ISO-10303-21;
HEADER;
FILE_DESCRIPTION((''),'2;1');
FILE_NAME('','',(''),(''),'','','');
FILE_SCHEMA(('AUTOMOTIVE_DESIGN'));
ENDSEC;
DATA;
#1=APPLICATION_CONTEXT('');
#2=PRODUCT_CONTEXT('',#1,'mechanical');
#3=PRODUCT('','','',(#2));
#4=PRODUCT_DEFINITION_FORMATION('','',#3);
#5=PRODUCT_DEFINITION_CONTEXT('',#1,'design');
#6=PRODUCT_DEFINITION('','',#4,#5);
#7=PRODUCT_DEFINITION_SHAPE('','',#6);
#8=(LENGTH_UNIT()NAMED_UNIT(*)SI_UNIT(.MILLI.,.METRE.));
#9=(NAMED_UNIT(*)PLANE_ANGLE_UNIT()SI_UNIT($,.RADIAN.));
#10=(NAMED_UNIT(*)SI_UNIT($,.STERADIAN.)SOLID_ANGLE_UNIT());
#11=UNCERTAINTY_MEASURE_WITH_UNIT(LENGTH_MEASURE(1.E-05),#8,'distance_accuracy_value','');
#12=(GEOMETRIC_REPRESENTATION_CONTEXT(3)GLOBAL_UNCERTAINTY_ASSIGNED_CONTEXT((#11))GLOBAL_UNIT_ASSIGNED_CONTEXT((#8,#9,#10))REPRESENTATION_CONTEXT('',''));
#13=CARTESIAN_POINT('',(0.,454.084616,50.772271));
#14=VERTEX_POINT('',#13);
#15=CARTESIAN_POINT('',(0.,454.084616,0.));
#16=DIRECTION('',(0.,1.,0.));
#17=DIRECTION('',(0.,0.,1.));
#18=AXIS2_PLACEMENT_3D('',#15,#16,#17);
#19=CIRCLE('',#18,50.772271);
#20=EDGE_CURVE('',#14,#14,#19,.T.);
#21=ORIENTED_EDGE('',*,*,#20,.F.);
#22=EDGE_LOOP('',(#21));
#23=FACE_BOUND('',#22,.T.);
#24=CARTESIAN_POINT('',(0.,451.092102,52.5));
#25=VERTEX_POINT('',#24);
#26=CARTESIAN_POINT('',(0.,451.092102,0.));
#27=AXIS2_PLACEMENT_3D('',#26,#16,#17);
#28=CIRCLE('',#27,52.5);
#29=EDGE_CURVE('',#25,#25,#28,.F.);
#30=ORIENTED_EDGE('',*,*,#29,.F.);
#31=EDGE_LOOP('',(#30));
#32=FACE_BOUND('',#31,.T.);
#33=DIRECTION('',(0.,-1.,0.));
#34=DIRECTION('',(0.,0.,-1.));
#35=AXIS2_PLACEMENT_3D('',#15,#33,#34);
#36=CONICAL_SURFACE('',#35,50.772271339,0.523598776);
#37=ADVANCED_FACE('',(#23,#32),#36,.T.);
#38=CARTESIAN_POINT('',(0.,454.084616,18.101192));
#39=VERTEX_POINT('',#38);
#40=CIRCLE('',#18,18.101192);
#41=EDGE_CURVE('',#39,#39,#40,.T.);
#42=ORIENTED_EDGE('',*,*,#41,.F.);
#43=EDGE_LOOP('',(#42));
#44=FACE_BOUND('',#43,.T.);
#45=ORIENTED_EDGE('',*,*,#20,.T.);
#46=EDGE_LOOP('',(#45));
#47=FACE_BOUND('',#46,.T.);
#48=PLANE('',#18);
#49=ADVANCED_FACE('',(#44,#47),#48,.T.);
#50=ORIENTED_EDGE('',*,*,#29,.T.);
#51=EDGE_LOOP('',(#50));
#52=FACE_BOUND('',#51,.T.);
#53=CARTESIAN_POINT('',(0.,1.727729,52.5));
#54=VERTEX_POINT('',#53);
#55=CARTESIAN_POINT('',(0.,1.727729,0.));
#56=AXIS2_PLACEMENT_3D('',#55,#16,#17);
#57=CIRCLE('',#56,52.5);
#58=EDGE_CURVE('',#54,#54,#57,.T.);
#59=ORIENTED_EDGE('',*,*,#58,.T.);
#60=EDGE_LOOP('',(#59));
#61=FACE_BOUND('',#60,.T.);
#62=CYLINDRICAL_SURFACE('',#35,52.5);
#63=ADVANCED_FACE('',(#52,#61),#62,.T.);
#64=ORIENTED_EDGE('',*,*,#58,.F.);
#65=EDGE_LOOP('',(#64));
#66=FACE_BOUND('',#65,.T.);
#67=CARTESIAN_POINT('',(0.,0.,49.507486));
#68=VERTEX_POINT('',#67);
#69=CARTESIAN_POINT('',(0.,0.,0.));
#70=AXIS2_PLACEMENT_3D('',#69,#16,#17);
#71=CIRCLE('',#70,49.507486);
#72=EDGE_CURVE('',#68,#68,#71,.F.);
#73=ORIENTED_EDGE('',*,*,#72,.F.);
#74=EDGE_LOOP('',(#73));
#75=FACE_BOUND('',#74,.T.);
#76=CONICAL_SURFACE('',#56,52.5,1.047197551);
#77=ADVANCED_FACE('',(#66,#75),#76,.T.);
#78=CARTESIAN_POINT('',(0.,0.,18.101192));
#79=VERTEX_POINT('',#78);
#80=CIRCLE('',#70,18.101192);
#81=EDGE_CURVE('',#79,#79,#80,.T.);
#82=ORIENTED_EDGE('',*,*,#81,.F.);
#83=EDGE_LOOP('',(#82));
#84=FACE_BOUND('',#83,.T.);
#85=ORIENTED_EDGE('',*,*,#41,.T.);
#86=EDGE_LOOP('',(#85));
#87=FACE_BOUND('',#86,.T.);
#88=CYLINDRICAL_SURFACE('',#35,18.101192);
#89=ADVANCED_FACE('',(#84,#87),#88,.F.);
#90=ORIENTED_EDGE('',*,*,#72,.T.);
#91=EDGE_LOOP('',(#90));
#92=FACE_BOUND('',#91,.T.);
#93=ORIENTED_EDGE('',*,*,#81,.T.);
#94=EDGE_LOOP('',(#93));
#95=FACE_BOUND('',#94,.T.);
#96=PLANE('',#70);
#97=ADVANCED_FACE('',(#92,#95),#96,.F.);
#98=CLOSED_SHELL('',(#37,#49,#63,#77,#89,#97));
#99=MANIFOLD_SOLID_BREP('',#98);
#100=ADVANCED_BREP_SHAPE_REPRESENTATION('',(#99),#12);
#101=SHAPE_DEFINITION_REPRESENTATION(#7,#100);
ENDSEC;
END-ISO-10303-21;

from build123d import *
from OCP.BRepFilletAPI import BRepFilletAPI_MakeChamfer

# Parameters (mm, degrees)
SKETCH1_R           = 52.5
BOSS_EXTRUDE1_DEPTH = 454.084616266
SKETCH2_R           = 18.101191581
CUT_EXTRUDE1_DEPTH  = 461.114484373
CHAMFER1_SIZE       = 2.992513822
CHAMFER1_SIZE2      = 1.727728661


with BuildPart() as part:
    # Sketch1 → Boss-Extrude1 (new body)
    with BuildSketch(Plane(origin=(0, 0, 0), x_dir=(1, 0, 0), z_dir=(0, 1, 0))):
        Circle(SKETCH1_R)
    extrude(amount=BOSS_EXTRUDE1_DEPTH)

    # Sketch2 → Cut-Extrude1 (cut, through all)
    with BuildSketch(Plane(origin=(0, 0, 0), x_dir=(1, 0, 0), z_dir=(0, 1, 0))):
        Circle(SKETCH2_R)
    extrude(amount=CUT_EXTRUDE1_DEPTH, mode=Mode.SUBTRACT)

    # Chamfer1: one chamfer whose edges measure the first distance from different faces: ONE call of the kernel's chamfer builder (chamfer() names one face for all edges)
    chamfer1_edges_1 = [part.edges().sort_by_distance(p)[0] for p in [
        (-52.5, 454.084616266, 0),
    ]]
    chamfer1_side_1 = [part.faces().sort_by_distance(p)[0] for p in [
        (-52.5, 227.042308133, 0),
    ]]
    chamfer1_edges_2 = [part.edges().sort_by_distance(p)[0] for p in [
        (-52.5, 0, 0),
    ]]
    chamfer1_side_2 = [part.faces().sort_by_distance(p)[0] for p in [
        (-51.01507576, 0, 0),
    ]]
    chamfer1 = BRepFilletAPI_MakeChamfer(part.part.solid().wrapped)
    for e in chamfer1_edges_1:
        chamfer1.Add(CHAMFER1_SIZE, CHAMFER1_SIZE2, e.wrapped, chamfer1_side_1[0].wrapped)  # the first distance lies on this face
    for e in chamfer1_edges_2:
        chamfer1.Add(CHAMFER1_SIZE, CHAMFER1_SIZE2, e.wrapped, chamfer1_side_2[0].wrapped)  # the first distance lies on this face
    add(Compound.cast(chamfer1.Shape()), mode=Mode.REPLACE)


solid = part.part
